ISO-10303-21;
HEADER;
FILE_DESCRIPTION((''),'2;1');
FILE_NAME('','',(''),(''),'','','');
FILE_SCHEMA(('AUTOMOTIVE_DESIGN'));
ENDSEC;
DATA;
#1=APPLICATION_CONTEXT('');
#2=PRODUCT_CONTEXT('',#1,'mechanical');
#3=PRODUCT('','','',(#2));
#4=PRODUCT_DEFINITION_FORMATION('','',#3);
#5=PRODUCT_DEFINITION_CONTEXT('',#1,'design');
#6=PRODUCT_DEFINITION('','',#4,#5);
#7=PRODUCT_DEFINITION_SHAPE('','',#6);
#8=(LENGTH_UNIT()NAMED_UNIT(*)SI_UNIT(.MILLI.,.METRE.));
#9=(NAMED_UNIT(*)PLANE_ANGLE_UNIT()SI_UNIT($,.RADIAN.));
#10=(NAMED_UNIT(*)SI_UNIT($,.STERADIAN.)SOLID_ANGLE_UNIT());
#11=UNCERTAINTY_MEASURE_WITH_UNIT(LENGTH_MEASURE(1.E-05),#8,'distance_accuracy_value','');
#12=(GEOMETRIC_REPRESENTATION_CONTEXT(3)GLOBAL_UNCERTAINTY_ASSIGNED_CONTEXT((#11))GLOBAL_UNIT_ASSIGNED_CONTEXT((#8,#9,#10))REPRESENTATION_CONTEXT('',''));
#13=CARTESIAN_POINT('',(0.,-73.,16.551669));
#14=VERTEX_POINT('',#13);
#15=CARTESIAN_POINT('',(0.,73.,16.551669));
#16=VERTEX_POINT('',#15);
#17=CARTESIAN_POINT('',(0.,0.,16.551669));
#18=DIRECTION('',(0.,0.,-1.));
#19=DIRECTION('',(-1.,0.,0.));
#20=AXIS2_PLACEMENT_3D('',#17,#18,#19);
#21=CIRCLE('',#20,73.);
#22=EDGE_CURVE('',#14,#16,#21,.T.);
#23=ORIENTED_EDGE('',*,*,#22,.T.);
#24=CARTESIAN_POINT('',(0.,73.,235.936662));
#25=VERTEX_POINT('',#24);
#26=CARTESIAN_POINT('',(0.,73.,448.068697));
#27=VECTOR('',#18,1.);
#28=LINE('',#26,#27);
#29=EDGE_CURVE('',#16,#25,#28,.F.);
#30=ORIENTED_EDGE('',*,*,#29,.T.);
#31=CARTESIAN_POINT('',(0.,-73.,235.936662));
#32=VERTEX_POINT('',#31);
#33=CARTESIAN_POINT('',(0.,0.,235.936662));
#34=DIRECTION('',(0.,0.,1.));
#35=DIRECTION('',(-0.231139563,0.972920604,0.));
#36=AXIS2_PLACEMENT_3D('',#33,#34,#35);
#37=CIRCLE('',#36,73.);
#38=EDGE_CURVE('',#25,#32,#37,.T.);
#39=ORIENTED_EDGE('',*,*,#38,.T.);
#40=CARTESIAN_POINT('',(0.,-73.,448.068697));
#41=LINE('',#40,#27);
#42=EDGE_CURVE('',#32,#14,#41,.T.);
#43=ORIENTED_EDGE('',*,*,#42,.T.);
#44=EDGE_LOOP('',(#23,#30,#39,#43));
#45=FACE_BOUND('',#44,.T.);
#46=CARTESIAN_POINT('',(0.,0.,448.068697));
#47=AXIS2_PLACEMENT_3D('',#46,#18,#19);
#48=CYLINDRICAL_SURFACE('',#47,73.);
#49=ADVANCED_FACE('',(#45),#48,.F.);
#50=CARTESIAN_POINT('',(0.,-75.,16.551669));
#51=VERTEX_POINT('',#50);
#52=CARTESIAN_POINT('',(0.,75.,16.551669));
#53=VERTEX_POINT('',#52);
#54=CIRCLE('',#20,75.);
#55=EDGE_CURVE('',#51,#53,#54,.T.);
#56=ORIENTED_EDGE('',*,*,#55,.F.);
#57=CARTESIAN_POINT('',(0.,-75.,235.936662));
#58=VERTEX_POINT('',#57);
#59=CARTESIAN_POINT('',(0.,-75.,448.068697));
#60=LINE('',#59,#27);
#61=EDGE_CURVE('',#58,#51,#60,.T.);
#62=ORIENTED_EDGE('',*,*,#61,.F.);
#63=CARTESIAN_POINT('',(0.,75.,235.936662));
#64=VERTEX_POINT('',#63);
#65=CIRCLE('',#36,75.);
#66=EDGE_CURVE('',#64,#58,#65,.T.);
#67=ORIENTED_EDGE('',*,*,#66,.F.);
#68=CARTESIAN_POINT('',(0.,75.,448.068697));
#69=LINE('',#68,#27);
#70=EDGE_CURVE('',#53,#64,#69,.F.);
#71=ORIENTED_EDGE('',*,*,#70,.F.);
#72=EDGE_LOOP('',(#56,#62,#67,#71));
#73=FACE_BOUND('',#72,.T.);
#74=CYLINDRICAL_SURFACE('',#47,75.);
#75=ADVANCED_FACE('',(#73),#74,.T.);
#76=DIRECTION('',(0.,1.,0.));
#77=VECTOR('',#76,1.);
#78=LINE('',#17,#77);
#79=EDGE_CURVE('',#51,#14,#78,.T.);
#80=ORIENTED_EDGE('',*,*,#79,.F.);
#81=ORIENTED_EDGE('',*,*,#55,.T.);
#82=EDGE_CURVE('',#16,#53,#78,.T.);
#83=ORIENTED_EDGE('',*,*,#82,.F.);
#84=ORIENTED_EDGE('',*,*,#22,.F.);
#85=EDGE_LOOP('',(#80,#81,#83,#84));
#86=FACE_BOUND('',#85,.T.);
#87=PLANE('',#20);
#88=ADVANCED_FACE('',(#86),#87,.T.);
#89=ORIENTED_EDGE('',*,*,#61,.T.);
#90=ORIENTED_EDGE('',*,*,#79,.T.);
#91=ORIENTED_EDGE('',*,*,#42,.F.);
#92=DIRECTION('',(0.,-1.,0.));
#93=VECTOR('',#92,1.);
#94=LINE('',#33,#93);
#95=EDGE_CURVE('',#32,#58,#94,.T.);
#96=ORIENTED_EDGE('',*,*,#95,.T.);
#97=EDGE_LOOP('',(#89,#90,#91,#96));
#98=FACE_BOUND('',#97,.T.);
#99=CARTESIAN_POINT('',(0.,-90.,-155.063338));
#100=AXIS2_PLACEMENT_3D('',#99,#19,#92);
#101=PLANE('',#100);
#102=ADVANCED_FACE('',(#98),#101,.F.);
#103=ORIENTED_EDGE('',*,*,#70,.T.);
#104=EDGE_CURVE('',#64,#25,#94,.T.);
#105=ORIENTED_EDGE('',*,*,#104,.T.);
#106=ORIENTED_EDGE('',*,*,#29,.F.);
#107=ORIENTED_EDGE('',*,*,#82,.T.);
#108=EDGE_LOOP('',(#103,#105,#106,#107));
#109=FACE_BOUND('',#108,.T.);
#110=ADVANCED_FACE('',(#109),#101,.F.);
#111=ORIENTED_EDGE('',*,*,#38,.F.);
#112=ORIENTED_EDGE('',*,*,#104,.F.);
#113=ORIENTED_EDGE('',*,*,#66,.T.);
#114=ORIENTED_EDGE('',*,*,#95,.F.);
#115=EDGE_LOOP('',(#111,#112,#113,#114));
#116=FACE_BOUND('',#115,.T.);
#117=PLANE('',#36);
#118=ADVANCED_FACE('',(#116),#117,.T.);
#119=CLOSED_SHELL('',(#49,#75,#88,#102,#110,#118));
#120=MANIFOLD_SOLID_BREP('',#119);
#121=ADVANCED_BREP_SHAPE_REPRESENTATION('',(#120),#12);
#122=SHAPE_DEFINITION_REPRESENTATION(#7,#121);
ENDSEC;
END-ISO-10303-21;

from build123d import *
from OCP.BRepAlgoAPI import BRepAlgoAPI_Cut
from OCP.TopTools import TopTools_ListOfShape

# Parameters (mm, degrees)
ESTRUSIONE_SOTTILE1_START = 16.551669
SCHIZZO1_R                = 75
SCHIZZO1_R_2              = 73
ESTRUSIONE_SOTTILE1_DEPTH = 219.384994
SCHIZZO5_W                = 100
SCHIZZO5_H                = 180
TAGLIO_ESTRUSIONE1_DEPTH  = 391


with BuildPart() as part:
    # Schizzo1 → Estrusione-Sottile1 (new body)
    with BuildSketch(Plane.XY.offset(ESTRUSIONE_SOTTILE1_START)):
        Circle(SCHIZZO1_R)
        Circle(SCHIZZO1_R_2, mode=Mode.SUBTRACT)
    extrude(amount=ESTRUSIONE_SOTTILE1_DEPTH)


with BuildPart() as taglio_estrusione1_tool:
    # Schizzo5 → Taglio-Estrusione1 (new body)
    with BuildSketch(Plane.XY.offset(235.936662498)):
        with Locations((50, 0)):
            Rectangle(SCHIZZO5_W, SCHIZZO5_H)
    extrude(amount=-TAGLIO_ESTRUSIONE1_DEPTH)


with BuildPart() as part_1:
    add(part.part)

    # Taglio-Estrusione1: cut by taglio_estrusione1_tool, with a tolerance
    taglio_estrusione1_stock = TopTools_ListOfShape()
    taglio_estrusione1_stock.Append(part_1.part.wrapped)
    taglio_estrusione1_tools = TopTools_ListOfShape()
    taglio_estrusione1_tools.Append(taglio_estrusione1_tool.part.wrapped)
    taglio_estrusione1_cut = BRepAlgoAPI_Cut()
    taglio_estrusione1_cut.SetArguments(taglio_estrusione1_stock)
    taglio_estrusione1_cut.SetTools(taglio_estrusione1_tools)
    taglio_estrusione1_cut.SetFuzzyValue(0.00001)
    taglio_estrusione1_cut.Build()
    add(Compound.cast(taglio_estrusione1_cut.Shape()).solids(), mode=Mode.REPLACE)


solid = part_1.part
